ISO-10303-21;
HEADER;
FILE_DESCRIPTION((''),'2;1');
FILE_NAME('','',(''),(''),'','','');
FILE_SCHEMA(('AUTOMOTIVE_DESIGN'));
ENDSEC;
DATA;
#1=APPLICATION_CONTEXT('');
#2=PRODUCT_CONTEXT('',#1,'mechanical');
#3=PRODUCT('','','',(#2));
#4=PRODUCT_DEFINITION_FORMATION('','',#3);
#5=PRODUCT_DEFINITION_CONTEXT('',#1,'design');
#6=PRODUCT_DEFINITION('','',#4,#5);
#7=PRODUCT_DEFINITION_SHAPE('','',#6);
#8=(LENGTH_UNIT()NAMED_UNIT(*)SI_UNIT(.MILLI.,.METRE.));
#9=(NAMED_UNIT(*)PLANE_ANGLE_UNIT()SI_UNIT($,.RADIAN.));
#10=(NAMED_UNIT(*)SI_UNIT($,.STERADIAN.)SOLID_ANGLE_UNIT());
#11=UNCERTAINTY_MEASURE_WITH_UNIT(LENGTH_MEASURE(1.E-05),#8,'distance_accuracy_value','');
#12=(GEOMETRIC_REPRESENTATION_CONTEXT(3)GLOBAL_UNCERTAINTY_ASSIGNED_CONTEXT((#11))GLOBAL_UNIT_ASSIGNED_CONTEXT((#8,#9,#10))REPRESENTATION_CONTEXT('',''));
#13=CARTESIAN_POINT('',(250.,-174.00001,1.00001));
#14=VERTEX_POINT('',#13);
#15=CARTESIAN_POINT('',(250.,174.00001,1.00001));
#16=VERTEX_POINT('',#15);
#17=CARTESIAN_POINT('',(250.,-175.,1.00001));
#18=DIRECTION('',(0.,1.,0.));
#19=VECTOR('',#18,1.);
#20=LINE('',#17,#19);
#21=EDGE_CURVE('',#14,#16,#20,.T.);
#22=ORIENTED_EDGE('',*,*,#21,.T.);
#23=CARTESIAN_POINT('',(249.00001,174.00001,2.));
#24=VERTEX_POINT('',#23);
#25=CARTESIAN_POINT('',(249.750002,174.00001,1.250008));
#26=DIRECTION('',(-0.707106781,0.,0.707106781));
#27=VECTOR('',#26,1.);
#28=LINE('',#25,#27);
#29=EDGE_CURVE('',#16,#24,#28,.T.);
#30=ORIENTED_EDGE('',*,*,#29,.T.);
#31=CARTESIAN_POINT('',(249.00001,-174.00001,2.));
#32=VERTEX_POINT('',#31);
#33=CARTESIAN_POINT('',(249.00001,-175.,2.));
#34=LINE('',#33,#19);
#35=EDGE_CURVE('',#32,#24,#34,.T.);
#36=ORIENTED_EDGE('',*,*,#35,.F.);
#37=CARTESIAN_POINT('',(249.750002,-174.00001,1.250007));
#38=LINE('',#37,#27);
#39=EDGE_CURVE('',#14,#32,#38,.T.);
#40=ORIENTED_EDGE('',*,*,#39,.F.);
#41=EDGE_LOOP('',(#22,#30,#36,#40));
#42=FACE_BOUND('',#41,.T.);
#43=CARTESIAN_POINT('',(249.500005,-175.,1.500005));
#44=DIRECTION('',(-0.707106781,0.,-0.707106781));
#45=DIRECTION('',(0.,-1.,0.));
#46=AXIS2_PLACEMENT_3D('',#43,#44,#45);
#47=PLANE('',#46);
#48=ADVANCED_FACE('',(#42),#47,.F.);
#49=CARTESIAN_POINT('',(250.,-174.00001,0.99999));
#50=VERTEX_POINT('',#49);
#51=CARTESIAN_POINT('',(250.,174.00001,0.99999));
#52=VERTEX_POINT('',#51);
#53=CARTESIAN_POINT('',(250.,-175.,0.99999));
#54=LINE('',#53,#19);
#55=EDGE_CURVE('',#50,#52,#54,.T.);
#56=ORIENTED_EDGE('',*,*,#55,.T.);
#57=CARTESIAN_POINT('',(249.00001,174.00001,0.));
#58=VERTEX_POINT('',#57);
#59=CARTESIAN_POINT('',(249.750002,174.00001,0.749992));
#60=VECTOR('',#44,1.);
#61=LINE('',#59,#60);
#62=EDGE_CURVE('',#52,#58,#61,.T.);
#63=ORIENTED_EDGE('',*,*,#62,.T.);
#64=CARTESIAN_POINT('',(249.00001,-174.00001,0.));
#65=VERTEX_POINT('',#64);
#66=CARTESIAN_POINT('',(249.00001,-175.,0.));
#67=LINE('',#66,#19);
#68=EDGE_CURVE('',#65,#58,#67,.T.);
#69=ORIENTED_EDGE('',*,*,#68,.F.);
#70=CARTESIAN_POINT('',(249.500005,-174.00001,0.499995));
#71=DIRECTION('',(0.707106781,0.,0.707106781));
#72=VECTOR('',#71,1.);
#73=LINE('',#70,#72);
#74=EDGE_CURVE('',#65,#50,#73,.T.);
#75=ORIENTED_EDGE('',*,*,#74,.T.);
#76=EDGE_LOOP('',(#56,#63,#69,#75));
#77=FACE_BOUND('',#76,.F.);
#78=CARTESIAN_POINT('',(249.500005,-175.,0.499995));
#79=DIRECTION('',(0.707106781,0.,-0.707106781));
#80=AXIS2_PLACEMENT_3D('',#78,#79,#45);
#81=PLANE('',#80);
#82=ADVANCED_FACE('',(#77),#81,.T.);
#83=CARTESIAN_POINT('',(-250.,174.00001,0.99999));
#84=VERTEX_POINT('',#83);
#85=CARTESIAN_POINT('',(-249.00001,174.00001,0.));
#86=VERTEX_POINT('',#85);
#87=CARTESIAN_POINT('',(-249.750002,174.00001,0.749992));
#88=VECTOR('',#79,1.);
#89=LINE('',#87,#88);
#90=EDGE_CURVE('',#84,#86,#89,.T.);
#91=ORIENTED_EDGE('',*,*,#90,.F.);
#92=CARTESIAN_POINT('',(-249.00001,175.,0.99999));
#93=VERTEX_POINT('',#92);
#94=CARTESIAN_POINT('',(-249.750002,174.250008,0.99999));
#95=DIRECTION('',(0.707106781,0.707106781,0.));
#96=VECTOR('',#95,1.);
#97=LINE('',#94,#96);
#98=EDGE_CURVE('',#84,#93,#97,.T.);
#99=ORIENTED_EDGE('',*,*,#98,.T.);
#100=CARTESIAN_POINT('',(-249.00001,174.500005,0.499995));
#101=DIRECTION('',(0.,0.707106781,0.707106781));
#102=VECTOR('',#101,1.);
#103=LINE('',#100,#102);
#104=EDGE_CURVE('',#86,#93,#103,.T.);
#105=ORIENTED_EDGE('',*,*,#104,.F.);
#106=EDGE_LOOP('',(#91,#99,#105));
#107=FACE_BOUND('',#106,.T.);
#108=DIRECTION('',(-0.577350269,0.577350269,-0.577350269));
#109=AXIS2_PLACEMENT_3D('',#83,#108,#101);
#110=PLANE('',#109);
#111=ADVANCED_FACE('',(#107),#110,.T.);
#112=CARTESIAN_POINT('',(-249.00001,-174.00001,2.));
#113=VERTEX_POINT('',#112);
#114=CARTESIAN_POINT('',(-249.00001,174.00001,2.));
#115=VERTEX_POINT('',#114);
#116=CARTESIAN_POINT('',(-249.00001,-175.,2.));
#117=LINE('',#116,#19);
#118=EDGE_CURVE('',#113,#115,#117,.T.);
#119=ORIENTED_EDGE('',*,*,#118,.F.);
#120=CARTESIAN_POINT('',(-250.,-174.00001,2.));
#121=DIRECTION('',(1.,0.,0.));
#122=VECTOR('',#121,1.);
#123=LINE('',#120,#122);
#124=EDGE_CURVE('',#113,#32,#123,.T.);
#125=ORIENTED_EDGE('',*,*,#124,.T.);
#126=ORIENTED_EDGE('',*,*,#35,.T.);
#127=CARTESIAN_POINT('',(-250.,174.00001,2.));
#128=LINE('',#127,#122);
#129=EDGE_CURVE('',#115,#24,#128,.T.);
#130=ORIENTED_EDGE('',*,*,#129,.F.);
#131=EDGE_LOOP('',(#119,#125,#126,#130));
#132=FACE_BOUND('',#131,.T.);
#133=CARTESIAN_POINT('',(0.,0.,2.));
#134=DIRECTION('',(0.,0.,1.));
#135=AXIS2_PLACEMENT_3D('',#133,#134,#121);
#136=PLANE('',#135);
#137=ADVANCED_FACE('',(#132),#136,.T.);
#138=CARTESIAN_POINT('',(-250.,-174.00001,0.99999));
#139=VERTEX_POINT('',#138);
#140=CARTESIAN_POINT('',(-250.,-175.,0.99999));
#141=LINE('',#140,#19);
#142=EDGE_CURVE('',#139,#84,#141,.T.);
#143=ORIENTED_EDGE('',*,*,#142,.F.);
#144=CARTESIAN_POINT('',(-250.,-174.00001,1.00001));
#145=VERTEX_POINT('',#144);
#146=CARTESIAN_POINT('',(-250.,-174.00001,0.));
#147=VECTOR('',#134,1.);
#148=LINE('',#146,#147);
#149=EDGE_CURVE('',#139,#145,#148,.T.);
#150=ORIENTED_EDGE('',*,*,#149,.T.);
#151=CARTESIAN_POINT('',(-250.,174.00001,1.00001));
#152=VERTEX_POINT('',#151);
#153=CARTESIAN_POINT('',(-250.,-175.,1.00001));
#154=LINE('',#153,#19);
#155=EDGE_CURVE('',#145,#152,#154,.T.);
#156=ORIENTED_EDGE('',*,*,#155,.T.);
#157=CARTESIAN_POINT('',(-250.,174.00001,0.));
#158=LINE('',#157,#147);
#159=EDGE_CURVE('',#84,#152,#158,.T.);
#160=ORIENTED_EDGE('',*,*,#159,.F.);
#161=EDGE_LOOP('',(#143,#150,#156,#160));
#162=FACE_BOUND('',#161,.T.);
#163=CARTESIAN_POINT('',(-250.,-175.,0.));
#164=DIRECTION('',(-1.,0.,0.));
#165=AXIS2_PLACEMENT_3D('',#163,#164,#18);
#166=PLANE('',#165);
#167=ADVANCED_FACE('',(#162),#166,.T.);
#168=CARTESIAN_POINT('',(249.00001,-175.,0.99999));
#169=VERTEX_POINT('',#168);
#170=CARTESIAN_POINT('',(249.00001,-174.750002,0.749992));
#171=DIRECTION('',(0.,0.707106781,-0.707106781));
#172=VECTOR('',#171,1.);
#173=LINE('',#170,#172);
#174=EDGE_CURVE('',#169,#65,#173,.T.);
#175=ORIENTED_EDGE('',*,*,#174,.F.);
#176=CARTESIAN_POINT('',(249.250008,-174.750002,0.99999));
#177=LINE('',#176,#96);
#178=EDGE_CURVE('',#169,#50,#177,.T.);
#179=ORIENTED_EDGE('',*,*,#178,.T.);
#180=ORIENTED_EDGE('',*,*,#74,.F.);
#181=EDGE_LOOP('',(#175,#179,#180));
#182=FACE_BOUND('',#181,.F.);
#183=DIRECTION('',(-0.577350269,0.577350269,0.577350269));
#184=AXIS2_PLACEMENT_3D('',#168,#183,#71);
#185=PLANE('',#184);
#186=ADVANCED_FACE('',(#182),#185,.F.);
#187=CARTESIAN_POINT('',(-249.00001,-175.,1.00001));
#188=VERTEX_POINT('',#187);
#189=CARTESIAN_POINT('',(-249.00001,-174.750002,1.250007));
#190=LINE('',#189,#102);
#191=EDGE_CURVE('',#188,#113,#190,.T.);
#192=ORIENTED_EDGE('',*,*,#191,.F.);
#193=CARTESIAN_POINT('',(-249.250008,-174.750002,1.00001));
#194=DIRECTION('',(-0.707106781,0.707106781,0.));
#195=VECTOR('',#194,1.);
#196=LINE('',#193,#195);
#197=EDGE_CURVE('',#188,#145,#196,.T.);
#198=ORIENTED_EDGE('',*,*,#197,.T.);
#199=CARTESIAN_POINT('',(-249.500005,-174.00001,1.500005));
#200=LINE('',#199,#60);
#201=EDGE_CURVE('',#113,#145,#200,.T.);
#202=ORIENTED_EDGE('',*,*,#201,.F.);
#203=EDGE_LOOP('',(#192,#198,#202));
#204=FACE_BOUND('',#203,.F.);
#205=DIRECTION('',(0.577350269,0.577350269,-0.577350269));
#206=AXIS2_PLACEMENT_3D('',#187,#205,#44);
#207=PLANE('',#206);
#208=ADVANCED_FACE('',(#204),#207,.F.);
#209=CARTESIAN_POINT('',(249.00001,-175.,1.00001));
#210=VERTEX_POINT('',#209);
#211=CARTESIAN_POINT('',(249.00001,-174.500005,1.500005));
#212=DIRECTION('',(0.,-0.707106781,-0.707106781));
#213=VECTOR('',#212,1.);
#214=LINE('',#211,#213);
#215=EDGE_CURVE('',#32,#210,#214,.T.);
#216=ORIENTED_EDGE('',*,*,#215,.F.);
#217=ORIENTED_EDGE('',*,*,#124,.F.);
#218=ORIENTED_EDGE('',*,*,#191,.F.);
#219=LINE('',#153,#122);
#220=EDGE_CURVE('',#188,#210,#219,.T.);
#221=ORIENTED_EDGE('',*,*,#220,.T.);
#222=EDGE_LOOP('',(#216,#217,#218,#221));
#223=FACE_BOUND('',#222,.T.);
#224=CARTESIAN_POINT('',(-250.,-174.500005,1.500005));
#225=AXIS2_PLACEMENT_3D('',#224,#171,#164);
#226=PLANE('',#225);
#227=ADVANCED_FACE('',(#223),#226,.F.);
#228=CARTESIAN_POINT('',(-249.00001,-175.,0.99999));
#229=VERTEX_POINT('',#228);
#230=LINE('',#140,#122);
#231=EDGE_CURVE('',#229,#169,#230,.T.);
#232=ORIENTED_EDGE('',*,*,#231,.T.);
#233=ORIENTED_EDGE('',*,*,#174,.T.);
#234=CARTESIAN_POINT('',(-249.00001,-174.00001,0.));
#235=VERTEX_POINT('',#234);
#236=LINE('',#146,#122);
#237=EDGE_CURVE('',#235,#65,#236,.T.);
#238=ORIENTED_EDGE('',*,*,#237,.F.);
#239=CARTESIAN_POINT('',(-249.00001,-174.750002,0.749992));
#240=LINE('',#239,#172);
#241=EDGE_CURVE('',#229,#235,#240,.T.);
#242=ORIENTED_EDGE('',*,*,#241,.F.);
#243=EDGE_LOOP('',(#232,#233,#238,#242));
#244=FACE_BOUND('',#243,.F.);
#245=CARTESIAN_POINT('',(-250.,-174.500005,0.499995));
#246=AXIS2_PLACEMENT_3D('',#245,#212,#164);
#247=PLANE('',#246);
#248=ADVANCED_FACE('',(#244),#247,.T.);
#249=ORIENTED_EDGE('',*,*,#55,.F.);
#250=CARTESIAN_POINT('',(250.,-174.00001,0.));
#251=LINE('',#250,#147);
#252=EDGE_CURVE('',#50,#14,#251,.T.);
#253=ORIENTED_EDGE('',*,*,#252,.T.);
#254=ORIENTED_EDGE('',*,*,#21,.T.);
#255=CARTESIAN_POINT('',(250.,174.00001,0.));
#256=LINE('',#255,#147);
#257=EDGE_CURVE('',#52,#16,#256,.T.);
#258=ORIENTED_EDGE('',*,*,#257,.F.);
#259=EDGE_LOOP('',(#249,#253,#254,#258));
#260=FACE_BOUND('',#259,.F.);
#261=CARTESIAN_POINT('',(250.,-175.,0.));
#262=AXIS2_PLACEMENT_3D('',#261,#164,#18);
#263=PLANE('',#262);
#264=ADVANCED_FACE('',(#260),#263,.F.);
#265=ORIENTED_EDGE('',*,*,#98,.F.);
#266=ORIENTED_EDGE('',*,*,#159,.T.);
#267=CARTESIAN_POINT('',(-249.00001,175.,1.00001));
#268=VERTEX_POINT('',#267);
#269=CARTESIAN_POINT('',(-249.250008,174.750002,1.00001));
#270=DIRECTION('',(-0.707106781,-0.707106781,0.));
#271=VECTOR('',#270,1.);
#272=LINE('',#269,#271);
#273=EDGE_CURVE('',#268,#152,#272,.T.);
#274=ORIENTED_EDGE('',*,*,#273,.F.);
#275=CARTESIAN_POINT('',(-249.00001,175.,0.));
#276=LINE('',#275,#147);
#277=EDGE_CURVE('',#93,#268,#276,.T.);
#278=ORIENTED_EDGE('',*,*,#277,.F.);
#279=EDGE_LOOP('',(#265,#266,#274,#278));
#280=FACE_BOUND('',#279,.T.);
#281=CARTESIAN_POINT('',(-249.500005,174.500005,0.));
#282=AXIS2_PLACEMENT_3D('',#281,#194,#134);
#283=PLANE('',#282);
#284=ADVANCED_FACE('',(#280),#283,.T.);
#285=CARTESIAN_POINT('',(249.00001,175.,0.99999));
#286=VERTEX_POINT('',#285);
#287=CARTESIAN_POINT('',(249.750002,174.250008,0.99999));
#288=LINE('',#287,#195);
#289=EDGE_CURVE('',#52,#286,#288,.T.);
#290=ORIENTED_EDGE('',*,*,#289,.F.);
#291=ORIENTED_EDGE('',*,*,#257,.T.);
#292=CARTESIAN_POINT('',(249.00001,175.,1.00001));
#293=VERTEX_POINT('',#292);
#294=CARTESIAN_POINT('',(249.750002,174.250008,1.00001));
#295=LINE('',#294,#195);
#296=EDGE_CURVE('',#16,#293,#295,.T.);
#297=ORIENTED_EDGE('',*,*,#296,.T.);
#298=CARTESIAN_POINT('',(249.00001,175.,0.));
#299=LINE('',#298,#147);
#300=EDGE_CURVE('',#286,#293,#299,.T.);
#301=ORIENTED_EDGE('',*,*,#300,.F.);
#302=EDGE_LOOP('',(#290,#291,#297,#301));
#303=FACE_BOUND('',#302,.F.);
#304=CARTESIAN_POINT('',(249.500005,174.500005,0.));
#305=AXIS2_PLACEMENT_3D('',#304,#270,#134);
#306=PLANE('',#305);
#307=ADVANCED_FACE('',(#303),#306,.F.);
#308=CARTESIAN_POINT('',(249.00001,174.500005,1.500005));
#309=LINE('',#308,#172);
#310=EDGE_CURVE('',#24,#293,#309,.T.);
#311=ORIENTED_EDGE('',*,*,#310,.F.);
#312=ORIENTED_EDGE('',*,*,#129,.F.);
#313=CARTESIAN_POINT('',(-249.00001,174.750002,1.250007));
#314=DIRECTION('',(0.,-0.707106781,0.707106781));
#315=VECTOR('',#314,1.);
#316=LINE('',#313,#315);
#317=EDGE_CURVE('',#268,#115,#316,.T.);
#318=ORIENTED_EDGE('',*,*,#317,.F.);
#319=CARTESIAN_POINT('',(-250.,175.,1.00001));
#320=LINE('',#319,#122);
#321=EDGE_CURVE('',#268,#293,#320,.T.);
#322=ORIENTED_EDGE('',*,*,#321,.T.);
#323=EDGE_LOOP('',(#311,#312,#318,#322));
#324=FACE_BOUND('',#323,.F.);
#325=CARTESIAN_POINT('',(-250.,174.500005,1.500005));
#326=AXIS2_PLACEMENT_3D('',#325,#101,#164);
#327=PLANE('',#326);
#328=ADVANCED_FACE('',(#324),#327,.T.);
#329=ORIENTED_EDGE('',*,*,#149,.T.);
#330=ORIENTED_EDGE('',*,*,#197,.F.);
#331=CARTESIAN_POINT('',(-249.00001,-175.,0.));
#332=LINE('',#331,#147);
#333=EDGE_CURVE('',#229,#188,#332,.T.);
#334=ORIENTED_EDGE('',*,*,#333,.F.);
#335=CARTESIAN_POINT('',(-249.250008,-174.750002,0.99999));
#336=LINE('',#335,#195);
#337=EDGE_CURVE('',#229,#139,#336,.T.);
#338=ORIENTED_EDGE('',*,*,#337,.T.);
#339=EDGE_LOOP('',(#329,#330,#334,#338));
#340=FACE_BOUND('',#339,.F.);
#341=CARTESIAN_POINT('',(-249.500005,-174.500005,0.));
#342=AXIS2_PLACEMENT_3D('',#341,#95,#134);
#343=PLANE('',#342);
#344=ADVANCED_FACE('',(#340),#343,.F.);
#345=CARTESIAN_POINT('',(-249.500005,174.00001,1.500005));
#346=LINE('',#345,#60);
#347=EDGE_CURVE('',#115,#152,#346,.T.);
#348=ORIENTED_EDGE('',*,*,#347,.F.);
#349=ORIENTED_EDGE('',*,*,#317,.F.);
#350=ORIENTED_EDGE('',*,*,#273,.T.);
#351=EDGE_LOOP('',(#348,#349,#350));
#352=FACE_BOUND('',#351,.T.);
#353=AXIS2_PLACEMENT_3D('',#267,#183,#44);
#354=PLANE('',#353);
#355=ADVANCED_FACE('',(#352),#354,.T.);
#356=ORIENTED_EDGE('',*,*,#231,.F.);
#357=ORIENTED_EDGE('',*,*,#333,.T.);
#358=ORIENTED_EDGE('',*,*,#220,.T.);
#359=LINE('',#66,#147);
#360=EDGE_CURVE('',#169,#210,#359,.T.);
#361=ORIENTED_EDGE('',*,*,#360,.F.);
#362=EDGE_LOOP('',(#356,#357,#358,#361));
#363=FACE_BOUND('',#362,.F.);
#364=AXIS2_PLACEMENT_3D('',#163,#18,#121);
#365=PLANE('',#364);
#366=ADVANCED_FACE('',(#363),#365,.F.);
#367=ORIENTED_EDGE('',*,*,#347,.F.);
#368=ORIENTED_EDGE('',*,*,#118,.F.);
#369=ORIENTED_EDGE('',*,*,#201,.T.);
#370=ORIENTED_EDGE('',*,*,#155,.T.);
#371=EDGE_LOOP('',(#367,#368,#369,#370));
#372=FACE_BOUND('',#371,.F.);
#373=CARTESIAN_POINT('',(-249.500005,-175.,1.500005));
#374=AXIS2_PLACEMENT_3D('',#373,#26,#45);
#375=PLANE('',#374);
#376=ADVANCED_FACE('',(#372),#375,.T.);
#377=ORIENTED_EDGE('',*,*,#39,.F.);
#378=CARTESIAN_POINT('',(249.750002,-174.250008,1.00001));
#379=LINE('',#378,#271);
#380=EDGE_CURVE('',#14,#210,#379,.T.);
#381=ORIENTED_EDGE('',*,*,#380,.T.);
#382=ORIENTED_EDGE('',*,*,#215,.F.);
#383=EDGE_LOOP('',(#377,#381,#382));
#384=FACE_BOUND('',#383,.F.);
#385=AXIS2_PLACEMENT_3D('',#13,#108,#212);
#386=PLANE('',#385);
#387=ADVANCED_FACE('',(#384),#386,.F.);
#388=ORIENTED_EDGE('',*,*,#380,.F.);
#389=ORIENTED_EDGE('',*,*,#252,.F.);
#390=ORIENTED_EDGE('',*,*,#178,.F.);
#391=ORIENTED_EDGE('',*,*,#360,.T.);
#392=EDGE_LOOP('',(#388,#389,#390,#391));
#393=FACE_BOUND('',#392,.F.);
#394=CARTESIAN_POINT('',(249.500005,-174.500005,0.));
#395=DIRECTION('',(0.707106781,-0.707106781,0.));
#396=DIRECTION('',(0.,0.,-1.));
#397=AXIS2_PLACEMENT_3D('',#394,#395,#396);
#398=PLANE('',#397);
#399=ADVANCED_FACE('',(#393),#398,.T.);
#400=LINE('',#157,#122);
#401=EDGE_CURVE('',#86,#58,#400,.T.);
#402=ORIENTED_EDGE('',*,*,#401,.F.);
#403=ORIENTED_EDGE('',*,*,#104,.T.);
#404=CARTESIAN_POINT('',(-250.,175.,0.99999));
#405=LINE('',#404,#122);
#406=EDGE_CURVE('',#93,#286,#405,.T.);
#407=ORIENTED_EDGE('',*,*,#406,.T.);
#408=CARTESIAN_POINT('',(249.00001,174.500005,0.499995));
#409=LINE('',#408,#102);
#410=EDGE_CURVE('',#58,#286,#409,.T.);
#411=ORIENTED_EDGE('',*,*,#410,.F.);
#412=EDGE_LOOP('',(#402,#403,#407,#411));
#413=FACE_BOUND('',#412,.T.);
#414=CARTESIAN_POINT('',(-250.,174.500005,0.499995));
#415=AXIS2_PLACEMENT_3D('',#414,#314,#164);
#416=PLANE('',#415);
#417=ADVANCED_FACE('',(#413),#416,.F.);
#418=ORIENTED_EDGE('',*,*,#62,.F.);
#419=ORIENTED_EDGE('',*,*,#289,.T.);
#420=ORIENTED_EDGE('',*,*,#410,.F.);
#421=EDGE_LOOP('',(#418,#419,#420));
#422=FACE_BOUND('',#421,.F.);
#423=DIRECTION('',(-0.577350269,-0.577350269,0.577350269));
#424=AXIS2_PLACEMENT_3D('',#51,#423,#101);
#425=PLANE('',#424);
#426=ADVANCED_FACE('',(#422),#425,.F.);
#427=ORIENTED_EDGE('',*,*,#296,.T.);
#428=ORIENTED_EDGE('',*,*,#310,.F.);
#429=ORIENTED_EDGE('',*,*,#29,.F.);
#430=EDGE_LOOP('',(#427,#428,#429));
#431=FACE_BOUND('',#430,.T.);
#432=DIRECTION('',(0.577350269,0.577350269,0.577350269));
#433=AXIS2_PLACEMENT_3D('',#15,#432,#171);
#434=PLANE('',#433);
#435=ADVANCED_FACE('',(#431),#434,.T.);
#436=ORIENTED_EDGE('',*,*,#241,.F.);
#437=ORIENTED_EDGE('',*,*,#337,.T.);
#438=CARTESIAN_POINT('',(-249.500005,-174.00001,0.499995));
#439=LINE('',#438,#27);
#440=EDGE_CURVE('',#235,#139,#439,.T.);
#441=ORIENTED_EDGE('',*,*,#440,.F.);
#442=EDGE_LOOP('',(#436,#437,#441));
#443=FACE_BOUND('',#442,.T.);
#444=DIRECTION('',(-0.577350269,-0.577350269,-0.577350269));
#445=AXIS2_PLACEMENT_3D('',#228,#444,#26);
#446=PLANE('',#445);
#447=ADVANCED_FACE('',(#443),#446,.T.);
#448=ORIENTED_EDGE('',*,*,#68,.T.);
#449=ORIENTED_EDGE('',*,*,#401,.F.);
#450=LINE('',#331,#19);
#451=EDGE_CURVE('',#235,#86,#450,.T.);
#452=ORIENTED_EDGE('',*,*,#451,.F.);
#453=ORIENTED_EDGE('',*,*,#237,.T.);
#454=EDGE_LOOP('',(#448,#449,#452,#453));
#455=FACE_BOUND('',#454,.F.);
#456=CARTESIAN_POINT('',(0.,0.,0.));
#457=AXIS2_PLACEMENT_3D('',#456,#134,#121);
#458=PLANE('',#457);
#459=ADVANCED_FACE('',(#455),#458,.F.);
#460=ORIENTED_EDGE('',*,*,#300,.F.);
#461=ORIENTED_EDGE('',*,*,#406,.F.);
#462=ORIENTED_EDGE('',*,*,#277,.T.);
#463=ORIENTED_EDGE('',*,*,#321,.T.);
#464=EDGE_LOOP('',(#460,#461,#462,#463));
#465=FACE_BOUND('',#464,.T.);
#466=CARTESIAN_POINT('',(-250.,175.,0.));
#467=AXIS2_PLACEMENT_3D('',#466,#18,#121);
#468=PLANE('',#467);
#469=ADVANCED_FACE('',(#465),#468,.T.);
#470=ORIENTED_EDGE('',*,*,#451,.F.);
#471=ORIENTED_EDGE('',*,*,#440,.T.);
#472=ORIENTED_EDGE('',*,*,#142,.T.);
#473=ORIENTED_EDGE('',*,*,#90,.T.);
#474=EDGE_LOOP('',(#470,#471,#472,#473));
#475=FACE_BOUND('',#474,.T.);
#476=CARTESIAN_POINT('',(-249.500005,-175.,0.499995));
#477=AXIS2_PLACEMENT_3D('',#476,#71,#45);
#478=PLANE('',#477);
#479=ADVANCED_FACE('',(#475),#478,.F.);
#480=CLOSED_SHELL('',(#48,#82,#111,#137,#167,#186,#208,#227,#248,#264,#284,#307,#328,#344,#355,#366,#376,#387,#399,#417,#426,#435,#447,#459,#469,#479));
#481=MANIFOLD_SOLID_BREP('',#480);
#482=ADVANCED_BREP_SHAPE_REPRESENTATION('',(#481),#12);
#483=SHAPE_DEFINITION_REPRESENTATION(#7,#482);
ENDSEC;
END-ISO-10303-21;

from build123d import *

# Parameters (mm, degrees)
F0_W     = 500
F0_H     = 350
F1_DEPTH = 2
F2_SIZE  = 0.99999


# Not quite as in the source:
# - a fillet or chamfer is up to 0.001 mm smaller than in the source, because OpenCascade refuses the exact size


with BuildPart() as f1:
    # F0 (on Top) → F1 (new body)
    with BuildSketch(Plane.XY):
        Rectangle(F0_W, F0_H)
    extrude(amount=F1_DEPTH)

    # F2 (size 1 in the source; OpenCascade refuses exactly that, so slightly less here)
    f2_edges = [f1.edges().sort_by_distance(p)[0] for p in [
        (0, 175, 0),
        (-250, 0, 0),
        (-250, 0, 2),
        (0, 175, 2),
        (250, 0, 0),
        (0, -175, 2),
        (250, 0, 2),
        (0, -175, 0),
        (-250, -175, 1),
        (-250, 175, 1),
        (250, 175, 1),
        (250, -175, 1),
    ]]
    chamfer(f2_edges, length=F2_SIZE)


solid = f1.part
